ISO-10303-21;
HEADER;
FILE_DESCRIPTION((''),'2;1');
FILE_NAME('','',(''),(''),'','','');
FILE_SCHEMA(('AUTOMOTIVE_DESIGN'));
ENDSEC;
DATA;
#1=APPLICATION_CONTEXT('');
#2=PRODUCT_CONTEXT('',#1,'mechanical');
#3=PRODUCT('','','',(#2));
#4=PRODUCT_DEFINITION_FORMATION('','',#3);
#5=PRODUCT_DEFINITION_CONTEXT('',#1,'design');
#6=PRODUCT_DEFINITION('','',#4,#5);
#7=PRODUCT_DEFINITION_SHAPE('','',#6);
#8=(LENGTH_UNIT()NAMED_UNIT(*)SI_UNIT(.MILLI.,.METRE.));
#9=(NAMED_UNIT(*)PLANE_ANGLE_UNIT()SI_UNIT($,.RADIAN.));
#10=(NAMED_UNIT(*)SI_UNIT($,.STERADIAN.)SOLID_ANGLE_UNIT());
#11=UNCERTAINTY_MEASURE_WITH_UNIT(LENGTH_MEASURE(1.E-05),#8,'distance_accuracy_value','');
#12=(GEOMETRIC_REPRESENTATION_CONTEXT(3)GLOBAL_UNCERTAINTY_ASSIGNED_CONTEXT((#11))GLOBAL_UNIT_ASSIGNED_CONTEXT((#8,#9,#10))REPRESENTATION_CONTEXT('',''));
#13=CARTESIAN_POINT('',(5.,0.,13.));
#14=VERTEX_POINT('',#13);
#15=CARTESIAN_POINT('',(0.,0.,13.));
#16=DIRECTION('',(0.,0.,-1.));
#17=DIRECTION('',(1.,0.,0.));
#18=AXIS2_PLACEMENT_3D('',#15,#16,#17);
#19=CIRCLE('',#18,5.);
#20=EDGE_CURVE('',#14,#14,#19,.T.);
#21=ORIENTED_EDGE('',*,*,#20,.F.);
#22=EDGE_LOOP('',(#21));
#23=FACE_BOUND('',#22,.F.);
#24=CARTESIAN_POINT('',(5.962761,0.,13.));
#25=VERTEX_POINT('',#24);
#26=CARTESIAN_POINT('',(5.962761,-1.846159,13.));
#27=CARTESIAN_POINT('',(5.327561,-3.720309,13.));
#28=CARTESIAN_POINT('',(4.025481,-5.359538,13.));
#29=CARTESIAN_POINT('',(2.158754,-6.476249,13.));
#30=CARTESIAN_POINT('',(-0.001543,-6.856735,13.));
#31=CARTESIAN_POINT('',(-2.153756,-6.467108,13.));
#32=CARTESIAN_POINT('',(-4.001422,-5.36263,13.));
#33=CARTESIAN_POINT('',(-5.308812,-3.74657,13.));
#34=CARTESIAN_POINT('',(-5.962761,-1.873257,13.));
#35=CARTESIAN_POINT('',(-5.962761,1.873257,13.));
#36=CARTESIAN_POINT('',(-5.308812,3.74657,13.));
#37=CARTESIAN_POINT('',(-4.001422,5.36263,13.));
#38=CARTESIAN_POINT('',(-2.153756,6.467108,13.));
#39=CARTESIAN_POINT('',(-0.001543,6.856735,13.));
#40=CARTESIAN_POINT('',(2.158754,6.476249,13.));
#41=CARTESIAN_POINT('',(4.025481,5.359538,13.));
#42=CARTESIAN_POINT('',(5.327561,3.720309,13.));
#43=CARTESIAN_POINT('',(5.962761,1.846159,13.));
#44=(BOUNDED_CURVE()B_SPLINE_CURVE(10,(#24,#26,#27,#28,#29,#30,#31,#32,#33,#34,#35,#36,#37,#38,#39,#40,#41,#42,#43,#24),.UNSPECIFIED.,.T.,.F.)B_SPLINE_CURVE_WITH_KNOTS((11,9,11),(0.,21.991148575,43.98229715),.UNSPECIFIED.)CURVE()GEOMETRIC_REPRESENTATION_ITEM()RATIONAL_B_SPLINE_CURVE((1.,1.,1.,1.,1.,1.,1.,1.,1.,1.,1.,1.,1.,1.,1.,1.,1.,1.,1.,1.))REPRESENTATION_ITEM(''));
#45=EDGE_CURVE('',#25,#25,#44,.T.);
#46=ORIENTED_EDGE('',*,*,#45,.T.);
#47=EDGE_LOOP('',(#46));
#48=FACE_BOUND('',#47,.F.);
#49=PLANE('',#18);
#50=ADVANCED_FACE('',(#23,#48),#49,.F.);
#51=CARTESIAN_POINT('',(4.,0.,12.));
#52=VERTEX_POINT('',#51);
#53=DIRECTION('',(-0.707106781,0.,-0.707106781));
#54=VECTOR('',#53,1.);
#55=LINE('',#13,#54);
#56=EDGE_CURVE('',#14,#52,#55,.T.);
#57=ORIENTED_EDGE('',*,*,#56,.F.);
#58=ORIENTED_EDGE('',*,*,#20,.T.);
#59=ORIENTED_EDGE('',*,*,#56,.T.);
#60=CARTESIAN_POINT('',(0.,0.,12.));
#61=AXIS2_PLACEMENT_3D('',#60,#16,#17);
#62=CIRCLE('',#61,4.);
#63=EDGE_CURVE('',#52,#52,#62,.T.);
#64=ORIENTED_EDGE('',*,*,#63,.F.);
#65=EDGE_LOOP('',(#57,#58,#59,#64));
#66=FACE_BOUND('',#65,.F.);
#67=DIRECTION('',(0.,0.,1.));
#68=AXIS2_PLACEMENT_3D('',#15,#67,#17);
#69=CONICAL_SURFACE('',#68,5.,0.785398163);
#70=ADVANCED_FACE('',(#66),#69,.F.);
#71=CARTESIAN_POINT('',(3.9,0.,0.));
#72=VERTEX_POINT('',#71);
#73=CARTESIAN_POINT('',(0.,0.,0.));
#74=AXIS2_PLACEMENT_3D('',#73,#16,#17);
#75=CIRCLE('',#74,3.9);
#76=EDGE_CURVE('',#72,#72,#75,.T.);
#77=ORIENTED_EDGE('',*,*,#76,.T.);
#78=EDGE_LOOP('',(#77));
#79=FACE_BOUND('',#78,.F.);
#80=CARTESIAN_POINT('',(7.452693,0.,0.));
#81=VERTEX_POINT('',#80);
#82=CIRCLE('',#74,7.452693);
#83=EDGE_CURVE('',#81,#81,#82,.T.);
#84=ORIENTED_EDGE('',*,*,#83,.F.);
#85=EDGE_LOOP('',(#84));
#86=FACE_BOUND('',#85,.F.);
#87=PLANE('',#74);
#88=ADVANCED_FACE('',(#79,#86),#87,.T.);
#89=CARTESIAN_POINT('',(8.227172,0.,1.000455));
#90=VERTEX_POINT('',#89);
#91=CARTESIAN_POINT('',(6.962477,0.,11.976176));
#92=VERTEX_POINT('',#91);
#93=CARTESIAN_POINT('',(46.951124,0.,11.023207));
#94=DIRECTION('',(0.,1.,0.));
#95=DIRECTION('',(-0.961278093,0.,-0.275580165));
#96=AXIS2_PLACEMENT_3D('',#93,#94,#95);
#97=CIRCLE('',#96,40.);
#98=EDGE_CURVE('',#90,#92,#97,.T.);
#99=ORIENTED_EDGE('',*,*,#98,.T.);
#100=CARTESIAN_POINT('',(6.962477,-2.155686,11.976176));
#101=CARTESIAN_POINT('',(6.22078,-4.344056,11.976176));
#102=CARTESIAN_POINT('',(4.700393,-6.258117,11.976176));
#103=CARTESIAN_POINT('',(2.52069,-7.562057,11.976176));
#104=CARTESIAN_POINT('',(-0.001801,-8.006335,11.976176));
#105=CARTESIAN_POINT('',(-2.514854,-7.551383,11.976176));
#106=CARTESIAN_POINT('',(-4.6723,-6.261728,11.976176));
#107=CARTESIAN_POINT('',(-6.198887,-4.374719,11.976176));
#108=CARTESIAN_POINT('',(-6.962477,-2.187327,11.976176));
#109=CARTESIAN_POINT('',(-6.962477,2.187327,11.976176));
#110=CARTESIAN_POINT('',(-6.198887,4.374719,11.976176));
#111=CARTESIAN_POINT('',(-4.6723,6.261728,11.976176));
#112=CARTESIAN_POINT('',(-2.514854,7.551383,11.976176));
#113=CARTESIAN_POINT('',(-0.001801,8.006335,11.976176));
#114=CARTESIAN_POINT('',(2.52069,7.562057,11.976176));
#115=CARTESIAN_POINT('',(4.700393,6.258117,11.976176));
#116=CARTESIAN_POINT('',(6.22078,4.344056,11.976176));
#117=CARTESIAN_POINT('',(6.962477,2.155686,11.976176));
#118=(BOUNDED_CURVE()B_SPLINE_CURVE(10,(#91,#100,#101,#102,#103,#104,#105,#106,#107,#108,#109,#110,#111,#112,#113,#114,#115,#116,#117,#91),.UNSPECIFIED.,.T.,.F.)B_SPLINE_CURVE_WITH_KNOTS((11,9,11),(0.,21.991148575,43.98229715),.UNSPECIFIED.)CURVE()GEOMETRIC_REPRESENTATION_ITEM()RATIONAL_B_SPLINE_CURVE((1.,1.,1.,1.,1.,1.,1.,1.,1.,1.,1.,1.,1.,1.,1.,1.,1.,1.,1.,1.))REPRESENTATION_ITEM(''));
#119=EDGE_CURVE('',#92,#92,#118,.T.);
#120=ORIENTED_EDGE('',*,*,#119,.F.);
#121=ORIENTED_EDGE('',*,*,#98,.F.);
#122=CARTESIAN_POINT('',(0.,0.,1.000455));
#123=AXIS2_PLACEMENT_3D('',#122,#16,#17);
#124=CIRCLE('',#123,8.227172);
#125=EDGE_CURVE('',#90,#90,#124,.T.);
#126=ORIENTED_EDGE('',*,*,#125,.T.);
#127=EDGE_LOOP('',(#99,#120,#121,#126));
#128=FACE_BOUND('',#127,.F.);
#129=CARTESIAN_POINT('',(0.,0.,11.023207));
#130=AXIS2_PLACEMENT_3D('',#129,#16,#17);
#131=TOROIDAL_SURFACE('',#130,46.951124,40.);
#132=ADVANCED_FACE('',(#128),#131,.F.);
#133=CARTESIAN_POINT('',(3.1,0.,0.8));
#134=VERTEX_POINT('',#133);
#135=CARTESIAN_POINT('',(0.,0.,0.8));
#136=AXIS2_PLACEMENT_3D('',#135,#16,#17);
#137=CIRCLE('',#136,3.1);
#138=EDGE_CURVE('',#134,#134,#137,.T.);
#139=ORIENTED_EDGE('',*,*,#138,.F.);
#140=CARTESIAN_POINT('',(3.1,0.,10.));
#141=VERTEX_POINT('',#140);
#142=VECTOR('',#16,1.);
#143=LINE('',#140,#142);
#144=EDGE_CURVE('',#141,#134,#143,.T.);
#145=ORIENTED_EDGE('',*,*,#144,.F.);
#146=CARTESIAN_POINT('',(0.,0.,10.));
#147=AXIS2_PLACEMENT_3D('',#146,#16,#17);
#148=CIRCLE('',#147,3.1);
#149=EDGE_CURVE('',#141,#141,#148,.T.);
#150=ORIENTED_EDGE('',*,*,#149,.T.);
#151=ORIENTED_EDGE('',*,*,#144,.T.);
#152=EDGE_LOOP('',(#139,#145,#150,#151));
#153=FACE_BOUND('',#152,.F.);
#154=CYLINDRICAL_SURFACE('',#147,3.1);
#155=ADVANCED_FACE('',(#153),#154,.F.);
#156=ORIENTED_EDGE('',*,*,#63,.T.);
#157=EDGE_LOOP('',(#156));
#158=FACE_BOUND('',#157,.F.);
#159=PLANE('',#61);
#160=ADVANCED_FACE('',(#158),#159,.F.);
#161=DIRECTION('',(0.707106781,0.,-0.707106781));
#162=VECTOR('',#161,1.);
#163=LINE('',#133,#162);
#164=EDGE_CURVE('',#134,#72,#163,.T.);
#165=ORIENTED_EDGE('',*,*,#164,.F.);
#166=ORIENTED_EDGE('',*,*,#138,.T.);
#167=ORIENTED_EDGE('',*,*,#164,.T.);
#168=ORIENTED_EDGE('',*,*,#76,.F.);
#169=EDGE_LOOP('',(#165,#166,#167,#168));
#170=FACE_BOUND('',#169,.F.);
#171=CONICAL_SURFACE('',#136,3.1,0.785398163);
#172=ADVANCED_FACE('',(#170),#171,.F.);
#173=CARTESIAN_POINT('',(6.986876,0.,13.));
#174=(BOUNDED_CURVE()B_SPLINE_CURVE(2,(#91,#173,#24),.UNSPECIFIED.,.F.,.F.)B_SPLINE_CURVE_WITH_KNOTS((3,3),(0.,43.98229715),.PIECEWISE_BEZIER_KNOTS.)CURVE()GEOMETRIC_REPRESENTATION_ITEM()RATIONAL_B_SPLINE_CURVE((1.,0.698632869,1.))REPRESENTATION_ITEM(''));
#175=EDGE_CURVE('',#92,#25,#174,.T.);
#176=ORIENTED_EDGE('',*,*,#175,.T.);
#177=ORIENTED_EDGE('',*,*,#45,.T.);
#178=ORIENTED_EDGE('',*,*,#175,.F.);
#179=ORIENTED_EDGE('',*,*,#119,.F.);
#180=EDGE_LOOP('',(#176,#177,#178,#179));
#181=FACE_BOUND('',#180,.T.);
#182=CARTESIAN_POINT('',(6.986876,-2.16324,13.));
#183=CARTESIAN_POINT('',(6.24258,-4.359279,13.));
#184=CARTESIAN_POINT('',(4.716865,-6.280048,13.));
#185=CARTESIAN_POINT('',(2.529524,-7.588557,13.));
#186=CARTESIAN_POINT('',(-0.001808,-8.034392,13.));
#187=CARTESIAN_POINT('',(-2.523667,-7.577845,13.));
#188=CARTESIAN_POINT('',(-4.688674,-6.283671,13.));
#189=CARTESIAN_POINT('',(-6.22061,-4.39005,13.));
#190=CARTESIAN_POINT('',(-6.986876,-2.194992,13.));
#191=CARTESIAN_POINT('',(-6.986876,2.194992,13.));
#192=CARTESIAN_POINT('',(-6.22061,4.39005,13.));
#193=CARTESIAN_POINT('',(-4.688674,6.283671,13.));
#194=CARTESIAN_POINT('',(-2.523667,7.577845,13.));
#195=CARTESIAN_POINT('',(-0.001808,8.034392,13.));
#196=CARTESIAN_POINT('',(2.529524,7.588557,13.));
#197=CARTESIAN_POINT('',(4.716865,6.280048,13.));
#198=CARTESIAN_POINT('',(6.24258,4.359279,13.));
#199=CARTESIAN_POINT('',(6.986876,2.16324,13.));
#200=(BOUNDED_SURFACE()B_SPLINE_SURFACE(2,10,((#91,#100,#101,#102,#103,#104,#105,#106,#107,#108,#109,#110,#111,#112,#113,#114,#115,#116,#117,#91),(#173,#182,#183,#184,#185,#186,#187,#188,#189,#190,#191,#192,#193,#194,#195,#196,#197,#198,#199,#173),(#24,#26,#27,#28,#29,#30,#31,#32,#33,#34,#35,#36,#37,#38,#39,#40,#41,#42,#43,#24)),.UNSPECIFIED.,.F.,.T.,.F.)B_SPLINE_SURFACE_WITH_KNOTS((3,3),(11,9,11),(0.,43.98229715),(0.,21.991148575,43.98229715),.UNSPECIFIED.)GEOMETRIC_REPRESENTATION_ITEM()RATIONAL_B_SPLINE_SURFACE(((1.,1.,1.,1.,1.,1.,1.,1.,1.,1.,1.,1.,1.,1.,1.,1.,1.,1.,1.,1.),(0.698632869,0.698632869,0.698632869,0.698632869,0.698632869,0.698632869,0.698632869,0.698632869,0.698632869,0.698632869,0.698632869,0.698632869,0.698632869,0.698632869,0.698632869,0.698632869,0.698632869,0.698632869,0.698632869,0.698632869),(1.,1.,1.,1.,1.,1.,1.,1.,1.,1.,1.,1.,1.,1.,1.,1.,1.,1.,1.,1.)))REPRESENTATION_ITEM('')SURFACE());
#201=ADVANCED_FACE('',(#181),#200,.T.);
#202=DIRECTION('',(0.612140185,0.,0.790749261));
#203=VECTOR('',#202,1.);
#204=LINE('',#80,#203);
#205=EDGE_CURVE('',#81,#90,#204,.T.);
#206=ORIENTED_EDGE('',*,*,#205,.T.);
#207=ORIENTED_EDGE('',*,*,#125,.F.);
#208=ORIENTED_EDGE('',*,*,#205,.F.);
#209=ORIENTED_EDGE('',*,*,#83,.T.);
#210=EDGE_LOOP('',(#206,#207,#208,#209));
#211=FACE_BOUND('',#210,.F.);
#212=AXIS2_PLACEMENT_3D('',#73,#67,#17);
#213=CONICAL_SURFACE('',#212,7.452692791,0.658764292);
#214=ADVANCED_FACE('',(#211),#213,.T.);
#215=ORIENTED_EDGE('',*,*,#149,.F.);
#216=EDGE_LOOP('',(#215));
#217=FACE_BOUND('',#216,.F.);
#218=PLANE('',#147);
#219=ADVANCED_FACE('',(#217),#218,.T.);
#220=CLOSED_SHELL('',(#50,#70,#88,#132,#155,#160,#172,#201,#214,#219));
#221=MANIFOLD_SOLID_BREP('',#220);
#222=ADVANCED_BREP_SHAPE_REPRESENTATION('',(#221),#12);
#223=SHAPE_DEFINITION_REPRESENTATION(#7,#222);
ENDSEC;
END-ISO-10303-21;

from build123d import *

# Parameters (mm, degrees)
F4_R = 1


# Not quite as in the source:
# - a fillet or chamfer that OpenCascade refuses, or shapes differently, is made with other operations: its cross-section is extruded or revolved along the edge and cut away or added


with BuildPart() as f1:
    # F0 (on Front) → F1 (revolve)
    with BuildSketch(Plane.XZ):
        with BuildLine():
            Line((0, 12), (0, 10))
            Line((0, 10), (3.1, 10))
            Line((3.1, 10), (3.1, 0))
            Line((3.1, 0), (8.5, 0))
            ThreePointArc((8.5, 0), (7.2147663015, 6.4382422656), (7, 13))
            Line((7, 13), (5, 13))
            Line((5, 13), (4, 12))
            Line((4, 12), (0, 12))
        make_face()
    revolve(axis=Axis((0, 0, 11), (0, 0, -1)))

    # F3: chamfer of 0.8 on 2 edges, made by hand

    # F3_s1 → F3_t2 (revolve, cut)
    with BuildSketch(Plane.XZ):
        Polygon((3.1, 0.8), (3.9, 0), (3.1, 0), align=None)
    revolve(axis=Axis((0, 0, 0), (0, 0, -1)), mode=Mode.SUBTRACT)

    # F3_s3 → F3_t4 (revolve, cut)
    with BuildSketch(Plane.XZ):
        with BuildLine():
            Line((7.4526927913, 0), (8.2271718294, 1.0004550311))
            ThreePointArc((8.2271718294, 1.0004550311), (8.3578103434, 0.5086375801), (8.5, 0))
            Line((8.5, 0), (7.4526927913, 0))
        make_face()
    revolve(axis=Axis((0, 0, 0), (0, 0, -1)), mode=Mode.SUBTRACT)

    # F4
    f4_edges = [f1.edges().sort_by_distance(p)[0] for p in [
        (-7, 0, 13),
    ]]
    fillet(f4_edges, radius=F4_R)


solid = f1.part
